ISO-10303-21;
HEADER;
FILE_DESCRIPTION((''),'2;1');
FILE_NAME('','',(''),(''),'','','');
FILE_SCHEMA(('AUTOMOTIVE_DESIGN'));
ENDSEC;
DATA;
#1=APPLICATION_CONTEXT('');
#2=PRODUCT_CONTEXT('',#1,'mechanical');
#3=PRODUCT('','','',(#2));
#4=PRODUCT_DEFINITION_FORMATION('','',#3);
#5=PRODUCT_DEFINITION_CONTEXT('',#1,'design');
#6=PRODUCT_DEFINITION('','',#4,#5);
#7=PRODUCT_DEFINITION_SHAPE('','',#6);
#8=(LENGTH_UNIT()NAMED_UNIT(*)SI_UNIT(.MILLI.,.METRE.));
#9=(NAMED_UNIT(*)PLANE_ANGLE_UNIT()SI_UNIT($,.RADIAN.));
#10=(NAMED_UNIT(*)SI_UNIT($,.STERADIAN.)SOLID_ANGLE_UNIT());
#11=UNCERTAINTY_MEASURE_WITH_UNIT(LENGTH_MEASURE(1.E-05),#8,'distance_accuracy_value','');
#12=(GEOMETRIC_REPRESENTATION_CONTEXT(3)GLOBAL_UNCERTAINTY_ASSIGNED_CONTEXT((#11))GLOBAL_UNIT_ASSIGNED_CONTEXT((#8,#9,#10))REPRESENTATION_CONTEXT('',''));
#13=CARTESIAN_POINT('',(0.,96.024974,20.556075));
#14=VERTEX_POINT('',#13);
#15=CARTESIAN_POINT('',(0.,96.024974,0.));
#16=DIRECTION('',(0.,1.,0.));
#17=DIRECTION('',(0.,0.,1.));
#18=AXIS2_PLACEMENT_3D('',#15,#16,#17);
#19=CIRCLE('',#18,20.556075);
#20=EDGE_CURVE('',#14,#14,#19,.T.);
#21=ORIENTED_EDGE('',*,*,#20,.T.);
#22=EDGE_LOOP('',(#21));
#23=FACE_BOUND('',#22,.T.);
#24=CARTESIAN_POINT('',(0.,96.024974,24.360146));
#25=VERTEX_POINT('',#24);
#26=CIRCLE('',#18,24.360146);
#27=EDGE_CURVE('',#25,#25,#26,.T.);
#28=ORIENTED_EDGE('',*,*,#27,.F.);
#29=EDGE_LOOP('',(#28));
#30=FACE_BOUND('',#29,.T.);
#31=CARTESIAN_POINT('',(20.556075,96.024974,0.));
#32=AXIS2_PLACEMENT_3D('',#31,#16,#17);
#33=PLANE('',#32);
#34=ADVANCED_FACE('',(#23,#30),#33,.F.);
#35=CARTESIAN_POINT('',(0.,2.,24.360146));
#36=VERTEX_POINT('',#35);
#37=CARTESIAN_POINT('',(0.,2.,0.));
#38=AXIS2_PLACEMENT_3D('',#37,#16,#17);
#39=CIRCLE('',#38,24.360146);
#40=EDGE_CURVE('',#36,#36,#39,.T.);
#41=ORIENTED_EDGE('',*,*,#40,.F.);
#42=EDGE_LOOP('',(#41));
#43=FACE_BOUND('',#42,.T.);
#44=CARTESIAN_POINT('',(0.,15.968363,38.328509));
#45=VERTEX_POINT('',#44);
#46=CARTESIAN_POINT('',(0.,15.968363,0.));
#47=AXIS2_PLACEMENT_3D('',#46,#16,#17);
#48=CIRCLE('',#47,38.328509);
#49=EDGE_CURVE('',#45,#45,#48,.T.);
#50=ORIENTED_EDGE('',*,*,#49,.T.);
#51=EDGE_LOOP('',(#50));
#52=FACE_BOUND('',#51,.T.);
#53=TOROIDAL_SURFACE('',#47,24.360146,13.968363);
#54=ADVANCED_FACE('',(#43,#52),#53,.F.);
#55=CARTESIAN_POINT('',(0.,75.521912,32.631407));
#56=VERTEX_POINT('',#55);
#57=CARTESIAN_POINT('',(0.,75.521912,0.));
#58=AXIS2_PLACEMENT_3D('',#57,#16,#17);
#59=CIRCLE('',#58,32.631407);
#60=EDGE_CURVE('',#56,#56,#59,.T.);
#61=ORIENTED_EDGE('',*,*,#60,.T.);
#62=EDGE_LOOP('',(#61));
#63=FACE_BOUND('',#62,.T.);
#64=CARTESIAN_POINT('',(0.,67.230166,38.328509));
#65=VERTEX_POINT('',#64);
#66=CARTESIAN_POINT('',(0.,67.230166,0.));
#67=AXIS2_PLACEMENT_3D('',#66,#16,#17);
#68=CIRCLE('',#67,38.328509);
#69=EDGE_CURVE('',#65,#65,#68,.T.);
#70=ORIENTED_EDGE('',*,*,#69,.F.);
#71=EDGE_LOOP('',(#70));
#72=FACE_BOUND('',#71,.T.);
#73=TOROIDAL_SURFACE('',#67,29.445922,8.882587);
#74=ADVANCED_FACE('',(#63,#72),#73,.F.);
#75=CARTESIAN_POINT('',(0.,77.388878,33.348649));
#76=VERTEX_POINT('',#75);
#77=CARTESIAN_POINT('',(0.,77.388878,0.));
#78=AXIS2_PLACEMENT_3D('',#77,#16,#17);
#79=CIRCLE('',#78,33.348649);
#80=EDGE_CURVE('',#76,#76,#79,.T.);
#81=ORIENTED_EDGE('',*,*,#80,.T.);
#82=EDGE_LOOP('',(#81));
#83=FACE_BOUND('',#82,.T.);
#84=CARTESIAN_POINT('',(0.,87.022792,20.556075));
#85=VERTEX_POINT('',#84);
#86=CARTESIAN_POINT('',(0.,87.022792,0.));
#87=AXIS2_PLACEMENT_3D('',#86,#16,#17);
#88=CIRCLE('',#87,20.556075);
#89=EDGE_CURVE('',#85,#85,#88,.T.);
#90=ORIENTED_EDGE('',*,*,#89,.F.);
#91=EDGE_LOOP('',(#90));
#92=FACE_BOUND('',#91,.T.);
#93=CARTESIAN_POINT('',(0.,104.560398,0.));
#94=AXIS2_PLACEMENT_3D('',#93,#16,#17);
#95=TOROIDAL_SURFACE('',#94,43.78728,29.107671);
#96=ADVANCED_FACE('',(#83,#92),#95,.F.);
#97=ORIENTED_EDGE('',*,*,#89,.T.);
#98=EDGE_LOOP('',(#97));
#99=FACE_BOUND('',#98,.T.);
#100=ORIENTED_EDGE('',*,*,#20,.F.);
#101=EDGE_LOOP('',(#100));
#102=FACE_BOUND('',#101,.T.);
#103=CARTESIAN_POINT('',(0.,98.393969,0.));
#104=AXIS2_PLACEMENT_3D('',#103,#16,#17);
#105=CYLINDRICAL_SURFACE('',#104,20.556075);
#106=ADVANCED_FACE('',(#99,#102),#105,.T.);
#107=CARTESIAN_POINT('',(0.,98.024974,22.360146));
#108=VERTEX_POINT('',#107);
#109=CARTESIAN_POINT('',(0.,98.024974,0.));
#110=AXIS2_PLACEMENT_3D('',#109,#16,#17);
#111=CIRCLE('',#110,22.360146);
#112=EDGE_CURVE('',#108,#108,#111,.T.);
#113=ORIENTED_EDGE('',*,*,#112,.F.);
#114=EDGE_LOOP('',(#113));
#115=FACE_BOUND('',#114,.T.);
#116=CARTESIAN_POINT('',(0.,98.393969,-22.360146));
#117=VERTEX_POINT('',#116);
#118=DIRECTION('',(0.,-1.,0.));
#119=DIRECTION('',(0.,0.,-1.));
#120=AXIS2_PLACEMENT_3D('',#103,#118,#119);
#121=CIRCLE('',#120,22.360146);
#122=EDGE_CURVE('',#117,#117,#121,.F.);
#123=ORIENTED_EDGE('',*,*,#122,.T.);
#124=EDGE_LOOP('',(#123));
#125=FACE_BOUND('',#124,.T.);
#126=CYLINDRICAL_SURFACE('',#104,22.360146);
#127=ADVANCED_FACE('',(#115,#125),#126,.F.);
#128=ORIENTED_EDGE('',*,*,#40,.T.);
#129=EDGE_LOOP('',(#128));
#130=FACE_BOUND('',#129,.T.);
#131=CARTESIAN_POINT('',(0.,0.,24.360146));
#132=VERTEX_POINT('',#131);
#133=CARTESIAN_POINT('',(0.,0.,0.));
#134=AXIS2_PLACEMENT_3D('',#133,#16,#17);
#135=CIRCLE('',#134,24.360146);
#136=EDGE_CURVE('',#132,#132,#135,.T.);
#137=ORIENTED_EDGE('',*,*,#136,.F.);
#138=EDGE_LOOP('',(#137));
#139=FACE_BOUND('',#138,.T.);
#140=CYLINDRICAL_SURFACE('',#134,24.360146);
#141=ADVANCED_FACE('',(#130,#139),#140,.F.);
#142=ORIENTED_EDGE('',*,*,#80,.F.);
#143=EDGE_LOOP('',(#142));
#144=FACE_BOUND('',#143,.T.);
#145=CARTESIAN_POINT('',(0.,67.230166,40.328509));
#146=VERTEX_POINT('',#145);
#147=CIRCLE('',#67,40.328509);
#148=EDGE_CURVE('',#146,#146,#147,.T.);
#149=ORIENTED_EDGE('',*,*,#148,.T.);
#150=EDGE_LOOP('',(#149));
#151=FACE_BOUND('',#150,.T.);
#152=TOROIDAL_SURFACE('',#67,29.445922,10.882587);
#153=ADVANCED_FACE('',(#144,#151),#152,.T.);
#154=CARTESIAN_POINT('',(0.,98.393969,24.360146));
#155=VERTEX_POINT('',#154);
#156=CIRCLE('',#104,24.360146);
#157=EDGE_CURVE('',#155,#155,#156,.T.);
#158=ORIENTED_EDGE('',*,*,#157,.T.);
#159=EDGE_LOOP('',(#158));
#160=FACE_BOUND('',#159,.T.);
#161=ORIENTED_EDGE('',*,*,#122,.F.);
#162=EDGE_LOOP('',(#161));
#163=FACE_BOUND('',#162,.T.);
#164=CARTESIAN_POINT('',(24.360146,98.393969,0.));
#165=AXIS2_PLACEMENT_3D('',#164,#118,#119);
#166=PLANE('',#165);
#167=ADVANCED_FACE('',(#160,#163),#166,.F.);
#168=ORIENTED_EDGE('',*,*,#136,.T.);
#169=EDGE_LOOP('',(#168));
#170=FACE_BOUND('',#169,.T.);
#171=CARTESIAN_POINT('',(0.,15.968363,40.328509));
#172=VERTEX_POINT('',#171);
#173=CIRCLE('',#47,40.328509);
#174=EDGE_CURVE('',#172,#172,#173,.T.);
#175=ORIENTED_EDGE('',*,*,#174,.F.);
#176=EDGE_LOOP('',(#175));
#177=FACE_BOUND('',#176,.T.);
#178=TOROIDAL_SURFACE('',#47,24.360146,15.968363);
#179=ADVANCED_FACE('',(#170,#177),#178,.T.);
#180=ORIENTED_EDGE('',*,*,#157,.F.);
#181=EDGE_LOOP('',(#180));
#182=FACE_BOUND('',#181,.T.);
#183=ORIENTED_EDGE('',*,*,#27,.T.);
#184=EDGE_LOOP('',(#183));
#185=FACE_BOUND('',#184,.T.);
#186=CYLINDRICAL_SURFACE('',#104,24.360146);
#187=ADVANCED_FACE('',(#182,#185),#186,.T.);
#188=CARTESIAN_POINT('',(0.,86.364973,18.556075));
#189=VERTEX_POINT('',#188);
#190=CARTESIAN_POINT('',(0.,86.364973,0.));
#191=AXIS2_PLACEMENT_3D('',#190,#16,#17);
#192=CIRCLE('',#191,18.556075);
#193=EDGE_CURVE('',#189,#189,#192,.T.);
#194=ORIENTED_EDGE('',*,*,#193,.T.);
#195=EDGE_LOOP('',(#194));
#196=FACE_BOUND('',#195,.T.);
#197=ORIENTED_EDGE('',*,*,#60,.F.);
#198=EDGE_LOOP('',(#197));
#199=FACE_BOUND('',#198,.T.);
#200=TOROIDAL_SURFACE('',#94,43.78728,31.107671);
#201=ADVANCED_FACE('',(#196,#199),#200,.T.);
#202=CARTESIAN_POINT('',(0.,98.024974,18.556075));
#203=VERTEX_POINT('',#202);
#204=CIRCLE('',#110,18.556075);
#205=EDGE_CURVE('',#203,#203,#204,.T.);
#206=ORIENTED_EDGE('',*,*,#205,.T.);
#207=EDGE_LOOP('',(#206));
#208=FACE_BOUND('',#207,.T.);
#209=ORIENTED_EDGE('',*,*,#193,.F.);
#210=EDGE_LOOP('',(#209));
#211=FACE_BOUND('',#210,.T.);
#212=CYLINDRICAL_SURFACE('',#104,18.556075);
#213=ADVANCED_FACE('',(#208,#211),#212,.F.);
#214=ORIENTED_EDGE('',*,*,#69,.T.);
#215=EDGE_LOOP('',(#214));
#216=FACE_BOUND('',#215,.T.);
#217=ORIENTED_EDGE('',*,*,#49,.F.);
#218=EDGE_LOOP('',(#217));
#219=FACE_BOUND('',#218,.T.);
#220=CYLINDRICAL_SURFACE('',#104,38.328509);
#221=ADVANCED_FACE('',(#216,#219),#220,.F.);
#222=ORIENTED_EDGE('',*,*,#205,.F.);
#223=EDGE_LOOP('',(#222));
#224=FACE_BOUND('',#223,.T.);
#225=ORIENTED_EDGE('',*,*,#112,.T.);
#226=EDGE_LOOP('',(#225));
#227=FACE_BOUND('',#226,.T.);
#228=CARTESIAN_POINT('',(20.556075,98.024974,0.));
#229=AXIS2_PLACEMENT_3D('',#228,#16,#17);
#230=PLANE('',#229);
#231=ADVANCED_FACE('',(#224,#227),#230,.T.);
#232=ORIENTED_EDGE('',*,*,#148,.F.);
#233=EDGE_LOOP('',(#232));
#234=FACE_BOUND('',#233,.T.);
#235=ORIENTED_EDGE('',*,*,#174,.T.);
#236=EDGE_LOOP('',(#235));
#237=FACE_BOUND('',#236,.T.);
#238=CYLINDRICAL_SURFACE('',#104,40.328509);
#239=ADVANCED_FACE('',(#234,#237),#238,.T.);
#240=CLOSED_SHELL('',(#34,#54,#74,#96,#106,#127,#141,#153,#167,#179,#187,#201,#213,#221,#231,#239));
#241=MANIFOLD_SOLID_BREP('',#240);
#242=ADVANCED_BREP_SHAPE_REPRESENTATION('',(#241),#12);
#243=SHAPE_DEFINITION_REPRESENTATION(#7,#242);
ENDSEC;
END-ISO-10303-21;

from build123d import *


# Read off the part's stored shape, not the designer's step: Shell1
with BuildPart() as part:
    # Sketch1 → Revolve1 (revolve)
    with BuildSketch(Plane.XY, mode=Mode.PRIVATE) as revolve1_sk:
        with BuildLine():
            Line((0, 0), (24.360145845, 0))
            ThreePointArc((24.360145845, 0), (35.651483834, 4.677025332), (40.328509165, 15.96836332))
            Line((40.328509165, 15.96836332), (40.328509165, 67.23016629))
            ThreePointArc((40.328509165, 67.23016629), (38.415383352, 73.392914659), (33.348649325, 77.388878138))
            ThreePointArc((33.348649325, 77.388878138), (26.276782154, 81.308753559), (20.55607493, 87.022792188))
            Line((20.55607493, 87.022792188), (20.55607493, 96.024974169))
            Line((20.55607493, 96.024974169), (24.360145845, 96.024974169))
            Line((24.360145845, 96.024974169), (24.360145845, 98.393969428))
            Line((24.360145845, 98.393969428), (0, 98.393969428))
            Line((0, 98.393969428), (0, 0))
        make_face()
    revolve(revolve1_sk.sketch.rotate(Axis((0, 98.393969428, 0), (0, -1, 0)), 90), axis=Axis((0, 98.393969428, 0), (0, -1, 0)))

    # Shell1 outline → Shell1 (revolve, cut)
    with BuildSketch(Plane.XY):
        with BuildLine():
            Line((24.360145845, 0), (24.360145845, 2))
            ThreePointArc((24.360145845, 2), (34.237270271, 6.091238894), (38.328509165, 15.96836332))
            Line((38.328509165, 15.96836332), (38.328509165, 67.23016629))
            ThreePointArc((38.328509165, 67.23016629), (36.766977277, 72.260325849), (32.631406737, 75.521911864))
            ThreePointArc((32.631406737, 75.521911864), (24.803132334, 79.91715704), (18.55607493, 86.364973266))
            Line((18.55607493, 86.364973266), (18.55607493, 98.024974169))
            Line((18.55607493, 98.024974169), (22.360145845, 98.024974169))
            Line((22.360145845, 98.024974169), (22.360145845, 98.393969428))
            Line((22.360145845, 98.393969428), (0, 98.393969428))
            Line((0, 98.393969428), (0, 0))
            Line((0, 0), (24.360145845, 0))
        make_face()
    revolve(axis=Axis((0, 0, 0), (0, 1, 0)), mode=Mode.SUBTRACT)


solid = part.part
